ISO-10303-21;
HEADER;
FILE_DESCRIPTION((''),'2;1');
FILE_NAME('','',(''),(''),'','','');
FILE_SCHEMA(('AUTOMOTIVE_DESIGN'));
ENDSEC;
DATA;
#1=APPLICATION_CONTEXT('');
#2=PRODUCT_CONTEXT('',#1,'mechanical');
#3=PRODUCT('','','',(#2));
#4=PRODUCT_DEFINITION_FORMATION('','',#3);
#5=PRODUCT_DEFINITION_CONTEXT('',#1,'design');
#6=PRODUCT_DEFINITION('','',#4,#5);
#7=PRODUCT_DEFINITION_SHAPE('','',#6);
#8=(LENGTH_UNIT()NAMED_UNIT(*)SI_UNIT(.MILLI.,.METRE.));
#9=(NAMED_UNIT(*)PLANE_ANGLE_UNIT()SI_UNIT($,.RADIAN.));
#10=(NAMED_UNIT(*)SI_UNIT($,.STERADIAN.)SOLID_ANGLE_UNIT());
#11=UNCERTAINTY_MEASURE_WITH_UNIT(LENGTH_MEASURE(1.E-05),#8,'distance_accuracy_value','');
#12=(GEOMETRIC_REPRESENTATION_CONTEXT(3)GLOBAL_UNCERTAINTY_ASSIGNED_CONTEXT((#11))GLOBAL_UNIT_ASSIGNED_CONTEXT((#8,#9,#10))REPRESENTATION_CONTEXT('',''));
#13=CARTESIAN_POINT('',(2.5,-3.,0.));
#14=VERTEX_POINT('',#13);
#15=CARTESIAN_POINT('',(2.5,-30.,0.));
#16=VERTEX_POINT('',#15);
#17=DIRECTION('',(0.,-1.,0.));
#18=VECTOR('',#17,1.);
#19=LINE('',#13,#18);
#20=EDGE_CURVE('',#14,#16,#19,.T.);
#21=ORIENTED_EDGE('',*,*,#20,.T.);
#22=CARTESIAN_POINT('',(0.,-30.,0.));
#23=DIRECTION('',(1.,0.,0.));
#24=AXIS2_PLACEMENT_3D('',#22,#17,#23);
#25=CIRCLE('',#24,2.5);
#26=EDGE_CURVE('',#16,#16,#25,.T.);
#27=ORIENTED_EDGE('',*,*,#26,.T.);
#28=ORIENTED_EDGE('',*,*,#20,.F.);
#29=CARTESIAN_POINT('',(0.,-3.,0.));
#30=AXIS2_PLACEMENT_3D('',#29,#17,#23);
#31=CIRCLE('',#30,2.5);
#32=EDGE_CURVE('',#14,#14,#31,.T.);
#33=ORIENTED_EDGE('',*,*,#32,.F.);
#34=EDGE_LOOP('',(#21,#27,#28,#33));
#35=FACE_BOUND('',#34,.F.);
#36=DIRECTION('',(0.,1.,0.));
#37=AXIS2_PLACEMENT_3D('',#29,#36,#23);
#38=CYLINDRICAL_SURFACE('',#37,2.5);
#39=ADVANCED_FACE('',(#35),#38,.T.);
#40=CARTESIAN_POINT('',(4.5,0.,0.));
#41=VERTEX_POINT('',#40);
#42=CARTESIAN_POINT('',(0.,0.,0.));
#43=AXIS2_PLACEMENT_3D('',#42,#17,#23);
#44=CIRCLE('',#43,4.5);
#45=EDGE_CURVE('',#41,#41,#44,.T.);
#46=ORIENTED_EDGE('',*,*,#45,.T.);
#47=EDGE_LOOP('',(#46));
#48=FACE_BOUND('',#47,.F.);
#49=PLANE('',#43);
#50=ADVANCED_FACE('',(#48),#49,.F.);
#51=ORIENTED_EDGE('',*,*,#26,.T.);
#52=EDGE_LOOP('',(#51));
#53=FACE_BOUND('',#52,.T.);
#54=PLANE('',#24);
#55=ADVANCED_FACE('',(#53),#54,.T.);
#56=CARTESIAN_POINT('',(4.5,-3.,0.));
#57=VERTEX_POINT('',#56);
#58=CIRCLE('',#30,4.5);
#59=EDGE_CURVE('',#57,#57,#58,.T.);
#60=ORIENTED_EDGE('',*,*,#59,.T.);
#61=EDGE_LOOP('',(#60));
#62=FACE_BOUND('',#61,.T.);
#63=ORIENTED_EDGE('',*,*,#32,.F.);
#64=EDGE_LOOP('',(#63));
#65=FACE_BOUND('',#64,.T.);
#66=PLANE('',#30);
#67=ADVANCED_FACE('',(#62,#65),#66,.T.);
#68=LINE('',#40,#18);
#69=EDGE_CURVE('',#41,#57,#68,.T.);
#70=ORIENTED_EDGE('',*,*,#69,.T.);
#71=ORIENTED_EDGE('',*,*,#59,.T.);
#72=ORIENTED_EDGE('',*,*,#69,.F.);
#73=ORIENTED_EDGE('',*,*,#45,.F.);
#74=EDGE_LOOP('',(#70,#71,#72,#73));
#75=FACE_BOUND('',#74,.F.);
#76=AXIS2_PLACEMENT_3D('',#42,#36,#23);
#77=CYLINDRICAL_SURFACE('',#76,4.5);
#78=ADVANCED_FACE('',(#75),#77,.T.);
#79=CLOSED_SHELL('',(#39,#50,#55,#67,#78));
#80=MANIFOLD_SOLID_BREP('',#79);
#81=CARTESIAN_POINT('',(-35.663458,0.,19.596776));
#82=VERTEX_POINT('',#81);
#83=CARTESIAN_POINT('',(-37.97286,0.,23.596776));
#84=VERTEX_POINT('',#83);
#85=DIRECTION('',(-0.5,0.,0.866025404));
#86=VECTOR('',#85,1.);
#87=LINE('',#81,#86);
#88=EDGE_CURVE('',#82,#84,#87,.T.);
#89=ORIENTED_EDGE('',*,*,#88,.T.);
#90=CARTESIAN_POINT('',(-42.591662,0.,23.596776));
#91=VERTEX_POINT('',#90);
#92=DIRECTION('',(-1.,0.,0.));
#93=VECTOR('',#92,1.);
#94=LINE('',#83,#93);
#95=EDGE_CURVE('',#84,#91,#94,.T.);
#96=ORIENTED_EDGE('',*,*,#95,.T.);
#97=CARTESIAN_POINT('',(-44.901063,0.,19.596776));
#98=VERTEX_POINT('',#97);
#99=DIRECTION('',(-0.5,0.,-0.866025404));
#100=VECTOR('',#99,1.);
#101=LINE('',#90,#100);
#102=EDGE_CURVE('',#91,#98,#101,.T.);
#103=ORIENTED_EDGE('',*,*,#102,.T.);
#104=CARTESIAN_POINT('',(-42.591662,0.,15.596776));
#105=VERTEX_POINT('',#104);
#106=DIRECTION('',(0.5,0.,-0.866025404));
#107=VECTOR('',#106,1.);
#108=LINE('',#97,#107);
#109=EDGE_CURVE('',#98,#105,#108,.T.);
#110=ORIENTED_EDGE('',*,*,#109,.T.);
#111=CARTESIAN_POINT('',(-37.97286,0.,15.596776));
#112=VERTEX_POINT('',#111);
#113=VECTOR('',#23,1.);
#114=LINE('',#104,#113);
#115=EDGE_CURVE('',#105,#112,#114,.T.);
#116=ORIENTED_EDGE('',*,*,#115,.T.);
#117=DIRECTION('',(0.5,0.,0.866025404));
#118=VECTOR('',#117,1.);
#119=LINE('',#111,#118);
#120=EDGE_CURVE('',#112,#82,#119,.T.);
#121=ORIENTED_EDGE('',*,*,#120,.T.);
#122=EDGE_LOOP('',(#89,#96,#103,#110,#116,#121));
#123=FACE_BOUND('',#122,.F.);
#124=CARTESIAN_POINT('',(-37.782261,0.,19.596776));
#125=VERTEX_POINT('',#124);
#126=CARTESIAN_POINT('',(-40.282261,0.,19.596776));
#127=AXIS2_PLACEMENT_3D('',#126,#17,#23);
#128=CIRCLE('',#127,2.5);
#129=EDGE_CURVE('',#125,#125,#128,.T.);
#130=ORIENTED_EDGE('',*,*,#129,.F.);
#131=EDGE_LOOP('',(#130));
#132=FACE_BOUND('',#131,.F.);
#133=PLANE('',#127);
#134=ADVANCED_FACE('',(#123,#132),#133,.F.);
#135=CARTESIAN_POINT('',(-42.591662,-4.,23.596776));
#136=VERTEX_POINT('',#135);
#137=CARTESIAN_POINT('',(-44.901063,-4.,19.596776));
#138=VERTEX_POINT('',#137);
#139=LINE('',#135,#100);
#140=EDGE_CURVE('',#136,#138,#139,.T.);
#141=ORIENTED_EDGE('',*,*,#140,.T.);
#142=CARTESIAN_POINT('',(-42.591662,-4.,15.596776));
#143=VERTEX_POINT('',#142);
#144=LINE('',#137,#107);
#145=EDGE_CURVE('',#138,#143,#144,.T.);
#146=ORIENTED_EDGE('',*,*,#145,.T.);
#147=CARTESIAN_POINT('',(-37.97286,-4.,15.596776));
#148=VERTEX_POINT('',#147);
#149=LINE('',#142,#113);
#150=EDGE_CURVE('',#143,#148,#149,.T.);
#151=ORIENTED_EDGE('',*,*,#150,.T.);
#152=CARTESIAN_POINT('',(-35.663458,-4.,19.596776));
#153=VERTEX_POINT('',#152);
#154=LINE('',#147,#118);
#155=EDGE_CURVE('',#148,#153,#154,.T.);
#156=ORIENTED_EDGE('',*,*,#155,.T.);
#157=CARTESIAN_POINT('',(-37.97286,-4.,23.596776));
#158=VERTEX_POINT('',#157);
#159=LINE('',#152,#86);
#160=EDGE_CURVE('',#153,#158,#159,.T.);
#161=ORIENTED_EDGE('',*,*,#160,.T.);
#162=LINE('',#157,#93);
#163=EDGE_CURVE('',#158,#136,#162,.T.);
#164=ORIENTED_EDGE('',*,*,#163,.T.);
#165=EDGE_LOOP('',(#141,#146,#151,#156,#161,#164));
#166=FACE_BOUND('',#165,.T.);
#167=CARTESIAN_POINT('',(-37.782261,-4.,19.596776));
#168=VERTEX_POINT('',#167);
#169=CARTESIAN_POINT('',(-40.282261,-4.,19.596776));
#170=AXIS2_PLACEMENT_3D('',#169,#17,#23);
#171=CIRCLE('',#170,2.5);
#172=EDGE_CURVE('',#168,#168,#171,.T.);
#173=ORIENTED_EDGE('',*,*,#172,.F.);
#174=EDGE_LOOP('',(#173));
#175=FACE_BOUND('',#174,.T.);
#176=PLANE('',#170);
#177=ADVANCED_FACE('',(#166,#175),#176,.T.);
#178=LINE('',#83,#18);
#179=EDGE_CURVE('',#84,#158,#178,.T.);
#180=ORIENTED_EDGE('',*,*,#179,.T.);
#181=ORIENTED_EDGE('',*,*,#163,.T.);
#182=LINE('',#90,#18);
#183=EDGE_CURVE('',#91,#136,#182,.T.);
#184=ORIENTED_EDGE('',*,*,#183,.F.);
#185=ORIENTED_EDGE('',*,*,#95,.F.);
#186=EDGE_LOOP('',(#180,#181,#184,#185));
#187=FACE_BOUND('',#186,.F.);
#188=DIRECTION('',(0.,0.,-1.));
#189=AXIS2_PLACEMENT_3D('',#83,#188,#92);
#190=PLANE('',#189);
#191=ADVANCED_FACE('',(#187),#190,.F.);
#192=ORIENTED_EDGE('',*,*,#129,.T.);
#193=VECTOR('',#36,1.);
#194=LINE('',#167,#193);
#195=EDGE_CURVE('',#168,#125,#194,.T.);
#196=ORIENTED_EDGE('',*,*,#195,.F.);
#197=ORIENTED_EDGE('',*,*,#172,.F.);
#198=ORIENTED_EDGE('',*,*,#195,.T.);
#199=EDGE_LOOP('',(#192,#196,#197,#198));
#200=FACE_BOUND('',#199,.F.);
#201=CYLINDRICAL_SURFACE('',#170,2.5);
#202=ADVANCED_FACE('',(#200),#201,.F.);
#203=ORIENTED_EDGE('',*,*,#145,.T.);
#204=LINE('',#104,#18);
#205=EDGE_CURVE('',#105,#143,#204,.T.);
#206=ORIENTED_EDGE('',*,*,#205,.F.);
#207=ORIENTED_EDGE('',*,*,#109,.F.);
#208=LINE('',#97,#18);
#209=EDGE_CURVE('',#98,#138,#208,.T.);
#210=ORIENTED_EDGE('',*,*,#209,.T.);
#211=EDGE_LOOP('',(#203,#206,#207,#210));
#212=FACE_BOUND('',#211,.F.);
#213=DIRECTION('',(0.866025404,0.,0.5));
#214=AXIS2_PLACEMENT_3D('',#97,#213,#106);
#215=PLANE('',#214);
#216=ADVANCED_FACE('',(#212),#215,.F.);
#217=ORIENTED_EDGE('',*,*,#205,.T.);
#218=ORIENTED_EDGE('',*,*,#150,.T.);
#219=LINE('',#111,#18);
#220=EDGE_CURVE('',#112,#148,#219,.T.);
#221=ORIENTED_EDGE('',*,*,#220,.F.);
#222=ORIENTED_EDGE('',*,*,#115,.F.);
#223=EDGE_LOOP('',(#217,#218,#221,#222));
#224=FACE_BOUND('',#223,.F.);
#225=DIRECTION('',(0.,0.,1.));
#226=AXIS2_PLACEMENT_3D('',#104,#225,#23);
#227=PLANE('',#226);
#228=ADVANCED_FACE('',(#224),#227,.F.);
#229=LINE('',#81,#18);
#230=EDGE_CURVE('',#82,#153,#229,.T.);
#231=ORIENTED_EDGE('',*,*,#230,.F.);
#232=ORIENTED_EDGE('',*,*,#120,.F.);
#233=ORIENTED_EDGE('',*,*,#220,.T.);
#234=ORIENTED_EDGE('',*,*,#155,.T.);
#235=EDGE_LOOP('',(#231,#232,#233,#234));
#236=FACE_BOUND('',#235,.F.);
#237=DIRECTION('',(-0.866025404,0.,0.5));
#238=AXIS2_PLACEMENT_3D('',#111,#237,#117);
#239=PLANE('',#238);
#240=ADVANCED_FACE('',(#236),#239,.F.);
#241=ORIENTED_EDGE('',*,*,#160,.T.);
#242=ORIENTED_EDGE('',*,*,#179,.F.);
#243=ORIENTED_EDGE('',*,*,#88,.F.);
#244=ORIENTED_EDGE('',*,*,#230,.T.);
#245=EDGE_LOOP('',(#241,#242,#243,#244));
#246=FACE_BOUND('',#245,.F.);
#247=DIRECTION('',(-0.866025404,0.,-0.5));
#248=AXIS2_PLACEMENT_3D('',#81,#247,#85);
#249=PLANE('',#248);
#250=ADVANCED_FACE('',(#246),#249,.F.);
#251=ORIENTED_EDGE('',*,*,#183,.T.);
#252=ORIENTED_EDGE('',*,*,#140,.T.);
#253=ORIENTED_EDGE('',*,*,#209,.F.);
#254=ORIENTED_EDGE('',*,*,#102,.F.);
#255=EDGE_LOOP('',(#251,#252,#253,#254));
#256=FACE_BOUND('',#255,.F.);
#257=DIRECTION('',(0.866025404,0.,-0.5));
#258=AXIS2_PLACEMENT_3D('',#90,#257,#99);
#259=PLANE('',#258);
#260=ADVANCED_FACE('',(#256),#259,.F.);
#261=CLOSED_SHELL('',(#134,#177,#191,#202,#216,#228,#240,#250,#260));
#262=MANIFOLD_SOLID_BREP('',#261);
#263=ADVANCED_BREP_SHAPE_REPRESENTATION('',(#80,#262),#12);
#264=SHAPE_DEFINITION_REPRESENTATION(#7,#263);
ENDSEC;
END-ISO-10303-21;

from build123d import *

# Parameters (mm, degrees)
F0_R     = 4.5
F1_DEPTH = 3
F2_R     = 2.5
F3_DEPTH = 27
F5_DEPTH = 4
F6_R     = 2.5
F7_DEPTH = 4


with BuildPart() as f1:
    # F0 (on Front) → F1 (new body)
    with BuildSketch(Plane.XZ):
        Circle(F0_R)
    extrude(amount=F1_DEPTH)

    # F2 (on face) → F3 (join)
    with BuildSketch(Plane.XZ.offset(3)):
        Circle(F2_R)
    extrude(amount=F3_DEPTH)


with BuildPart() as f5:
    # F4 (on Front) → F5 (new body)
    with BuildSketch(Plane.XZ):
        Polygon((-42.5916617033, 15.5967759937), (-37.9728595498, 15.5967759937), (-35.663458473, 19.5967759937), (-37.9728595498, 23.5967759937), (-42.5916617033, 23.5967759937), (-44.9010627801, 19.5967759937), align=None)
    extrude(amount=F5_DEPTH)

    # F6 (on face) → F7 (cut, through all)
    with BuildSketch(Plane.XZ.offset(4)):
        with Locations((-40.2822606266, 19.5967759937)):
            Circle(F6_R)
    extrude(amount=-F7_DEPTH, mode=Mode.SUBTRACT)


solid = Compound([f1.part, f5.part])
